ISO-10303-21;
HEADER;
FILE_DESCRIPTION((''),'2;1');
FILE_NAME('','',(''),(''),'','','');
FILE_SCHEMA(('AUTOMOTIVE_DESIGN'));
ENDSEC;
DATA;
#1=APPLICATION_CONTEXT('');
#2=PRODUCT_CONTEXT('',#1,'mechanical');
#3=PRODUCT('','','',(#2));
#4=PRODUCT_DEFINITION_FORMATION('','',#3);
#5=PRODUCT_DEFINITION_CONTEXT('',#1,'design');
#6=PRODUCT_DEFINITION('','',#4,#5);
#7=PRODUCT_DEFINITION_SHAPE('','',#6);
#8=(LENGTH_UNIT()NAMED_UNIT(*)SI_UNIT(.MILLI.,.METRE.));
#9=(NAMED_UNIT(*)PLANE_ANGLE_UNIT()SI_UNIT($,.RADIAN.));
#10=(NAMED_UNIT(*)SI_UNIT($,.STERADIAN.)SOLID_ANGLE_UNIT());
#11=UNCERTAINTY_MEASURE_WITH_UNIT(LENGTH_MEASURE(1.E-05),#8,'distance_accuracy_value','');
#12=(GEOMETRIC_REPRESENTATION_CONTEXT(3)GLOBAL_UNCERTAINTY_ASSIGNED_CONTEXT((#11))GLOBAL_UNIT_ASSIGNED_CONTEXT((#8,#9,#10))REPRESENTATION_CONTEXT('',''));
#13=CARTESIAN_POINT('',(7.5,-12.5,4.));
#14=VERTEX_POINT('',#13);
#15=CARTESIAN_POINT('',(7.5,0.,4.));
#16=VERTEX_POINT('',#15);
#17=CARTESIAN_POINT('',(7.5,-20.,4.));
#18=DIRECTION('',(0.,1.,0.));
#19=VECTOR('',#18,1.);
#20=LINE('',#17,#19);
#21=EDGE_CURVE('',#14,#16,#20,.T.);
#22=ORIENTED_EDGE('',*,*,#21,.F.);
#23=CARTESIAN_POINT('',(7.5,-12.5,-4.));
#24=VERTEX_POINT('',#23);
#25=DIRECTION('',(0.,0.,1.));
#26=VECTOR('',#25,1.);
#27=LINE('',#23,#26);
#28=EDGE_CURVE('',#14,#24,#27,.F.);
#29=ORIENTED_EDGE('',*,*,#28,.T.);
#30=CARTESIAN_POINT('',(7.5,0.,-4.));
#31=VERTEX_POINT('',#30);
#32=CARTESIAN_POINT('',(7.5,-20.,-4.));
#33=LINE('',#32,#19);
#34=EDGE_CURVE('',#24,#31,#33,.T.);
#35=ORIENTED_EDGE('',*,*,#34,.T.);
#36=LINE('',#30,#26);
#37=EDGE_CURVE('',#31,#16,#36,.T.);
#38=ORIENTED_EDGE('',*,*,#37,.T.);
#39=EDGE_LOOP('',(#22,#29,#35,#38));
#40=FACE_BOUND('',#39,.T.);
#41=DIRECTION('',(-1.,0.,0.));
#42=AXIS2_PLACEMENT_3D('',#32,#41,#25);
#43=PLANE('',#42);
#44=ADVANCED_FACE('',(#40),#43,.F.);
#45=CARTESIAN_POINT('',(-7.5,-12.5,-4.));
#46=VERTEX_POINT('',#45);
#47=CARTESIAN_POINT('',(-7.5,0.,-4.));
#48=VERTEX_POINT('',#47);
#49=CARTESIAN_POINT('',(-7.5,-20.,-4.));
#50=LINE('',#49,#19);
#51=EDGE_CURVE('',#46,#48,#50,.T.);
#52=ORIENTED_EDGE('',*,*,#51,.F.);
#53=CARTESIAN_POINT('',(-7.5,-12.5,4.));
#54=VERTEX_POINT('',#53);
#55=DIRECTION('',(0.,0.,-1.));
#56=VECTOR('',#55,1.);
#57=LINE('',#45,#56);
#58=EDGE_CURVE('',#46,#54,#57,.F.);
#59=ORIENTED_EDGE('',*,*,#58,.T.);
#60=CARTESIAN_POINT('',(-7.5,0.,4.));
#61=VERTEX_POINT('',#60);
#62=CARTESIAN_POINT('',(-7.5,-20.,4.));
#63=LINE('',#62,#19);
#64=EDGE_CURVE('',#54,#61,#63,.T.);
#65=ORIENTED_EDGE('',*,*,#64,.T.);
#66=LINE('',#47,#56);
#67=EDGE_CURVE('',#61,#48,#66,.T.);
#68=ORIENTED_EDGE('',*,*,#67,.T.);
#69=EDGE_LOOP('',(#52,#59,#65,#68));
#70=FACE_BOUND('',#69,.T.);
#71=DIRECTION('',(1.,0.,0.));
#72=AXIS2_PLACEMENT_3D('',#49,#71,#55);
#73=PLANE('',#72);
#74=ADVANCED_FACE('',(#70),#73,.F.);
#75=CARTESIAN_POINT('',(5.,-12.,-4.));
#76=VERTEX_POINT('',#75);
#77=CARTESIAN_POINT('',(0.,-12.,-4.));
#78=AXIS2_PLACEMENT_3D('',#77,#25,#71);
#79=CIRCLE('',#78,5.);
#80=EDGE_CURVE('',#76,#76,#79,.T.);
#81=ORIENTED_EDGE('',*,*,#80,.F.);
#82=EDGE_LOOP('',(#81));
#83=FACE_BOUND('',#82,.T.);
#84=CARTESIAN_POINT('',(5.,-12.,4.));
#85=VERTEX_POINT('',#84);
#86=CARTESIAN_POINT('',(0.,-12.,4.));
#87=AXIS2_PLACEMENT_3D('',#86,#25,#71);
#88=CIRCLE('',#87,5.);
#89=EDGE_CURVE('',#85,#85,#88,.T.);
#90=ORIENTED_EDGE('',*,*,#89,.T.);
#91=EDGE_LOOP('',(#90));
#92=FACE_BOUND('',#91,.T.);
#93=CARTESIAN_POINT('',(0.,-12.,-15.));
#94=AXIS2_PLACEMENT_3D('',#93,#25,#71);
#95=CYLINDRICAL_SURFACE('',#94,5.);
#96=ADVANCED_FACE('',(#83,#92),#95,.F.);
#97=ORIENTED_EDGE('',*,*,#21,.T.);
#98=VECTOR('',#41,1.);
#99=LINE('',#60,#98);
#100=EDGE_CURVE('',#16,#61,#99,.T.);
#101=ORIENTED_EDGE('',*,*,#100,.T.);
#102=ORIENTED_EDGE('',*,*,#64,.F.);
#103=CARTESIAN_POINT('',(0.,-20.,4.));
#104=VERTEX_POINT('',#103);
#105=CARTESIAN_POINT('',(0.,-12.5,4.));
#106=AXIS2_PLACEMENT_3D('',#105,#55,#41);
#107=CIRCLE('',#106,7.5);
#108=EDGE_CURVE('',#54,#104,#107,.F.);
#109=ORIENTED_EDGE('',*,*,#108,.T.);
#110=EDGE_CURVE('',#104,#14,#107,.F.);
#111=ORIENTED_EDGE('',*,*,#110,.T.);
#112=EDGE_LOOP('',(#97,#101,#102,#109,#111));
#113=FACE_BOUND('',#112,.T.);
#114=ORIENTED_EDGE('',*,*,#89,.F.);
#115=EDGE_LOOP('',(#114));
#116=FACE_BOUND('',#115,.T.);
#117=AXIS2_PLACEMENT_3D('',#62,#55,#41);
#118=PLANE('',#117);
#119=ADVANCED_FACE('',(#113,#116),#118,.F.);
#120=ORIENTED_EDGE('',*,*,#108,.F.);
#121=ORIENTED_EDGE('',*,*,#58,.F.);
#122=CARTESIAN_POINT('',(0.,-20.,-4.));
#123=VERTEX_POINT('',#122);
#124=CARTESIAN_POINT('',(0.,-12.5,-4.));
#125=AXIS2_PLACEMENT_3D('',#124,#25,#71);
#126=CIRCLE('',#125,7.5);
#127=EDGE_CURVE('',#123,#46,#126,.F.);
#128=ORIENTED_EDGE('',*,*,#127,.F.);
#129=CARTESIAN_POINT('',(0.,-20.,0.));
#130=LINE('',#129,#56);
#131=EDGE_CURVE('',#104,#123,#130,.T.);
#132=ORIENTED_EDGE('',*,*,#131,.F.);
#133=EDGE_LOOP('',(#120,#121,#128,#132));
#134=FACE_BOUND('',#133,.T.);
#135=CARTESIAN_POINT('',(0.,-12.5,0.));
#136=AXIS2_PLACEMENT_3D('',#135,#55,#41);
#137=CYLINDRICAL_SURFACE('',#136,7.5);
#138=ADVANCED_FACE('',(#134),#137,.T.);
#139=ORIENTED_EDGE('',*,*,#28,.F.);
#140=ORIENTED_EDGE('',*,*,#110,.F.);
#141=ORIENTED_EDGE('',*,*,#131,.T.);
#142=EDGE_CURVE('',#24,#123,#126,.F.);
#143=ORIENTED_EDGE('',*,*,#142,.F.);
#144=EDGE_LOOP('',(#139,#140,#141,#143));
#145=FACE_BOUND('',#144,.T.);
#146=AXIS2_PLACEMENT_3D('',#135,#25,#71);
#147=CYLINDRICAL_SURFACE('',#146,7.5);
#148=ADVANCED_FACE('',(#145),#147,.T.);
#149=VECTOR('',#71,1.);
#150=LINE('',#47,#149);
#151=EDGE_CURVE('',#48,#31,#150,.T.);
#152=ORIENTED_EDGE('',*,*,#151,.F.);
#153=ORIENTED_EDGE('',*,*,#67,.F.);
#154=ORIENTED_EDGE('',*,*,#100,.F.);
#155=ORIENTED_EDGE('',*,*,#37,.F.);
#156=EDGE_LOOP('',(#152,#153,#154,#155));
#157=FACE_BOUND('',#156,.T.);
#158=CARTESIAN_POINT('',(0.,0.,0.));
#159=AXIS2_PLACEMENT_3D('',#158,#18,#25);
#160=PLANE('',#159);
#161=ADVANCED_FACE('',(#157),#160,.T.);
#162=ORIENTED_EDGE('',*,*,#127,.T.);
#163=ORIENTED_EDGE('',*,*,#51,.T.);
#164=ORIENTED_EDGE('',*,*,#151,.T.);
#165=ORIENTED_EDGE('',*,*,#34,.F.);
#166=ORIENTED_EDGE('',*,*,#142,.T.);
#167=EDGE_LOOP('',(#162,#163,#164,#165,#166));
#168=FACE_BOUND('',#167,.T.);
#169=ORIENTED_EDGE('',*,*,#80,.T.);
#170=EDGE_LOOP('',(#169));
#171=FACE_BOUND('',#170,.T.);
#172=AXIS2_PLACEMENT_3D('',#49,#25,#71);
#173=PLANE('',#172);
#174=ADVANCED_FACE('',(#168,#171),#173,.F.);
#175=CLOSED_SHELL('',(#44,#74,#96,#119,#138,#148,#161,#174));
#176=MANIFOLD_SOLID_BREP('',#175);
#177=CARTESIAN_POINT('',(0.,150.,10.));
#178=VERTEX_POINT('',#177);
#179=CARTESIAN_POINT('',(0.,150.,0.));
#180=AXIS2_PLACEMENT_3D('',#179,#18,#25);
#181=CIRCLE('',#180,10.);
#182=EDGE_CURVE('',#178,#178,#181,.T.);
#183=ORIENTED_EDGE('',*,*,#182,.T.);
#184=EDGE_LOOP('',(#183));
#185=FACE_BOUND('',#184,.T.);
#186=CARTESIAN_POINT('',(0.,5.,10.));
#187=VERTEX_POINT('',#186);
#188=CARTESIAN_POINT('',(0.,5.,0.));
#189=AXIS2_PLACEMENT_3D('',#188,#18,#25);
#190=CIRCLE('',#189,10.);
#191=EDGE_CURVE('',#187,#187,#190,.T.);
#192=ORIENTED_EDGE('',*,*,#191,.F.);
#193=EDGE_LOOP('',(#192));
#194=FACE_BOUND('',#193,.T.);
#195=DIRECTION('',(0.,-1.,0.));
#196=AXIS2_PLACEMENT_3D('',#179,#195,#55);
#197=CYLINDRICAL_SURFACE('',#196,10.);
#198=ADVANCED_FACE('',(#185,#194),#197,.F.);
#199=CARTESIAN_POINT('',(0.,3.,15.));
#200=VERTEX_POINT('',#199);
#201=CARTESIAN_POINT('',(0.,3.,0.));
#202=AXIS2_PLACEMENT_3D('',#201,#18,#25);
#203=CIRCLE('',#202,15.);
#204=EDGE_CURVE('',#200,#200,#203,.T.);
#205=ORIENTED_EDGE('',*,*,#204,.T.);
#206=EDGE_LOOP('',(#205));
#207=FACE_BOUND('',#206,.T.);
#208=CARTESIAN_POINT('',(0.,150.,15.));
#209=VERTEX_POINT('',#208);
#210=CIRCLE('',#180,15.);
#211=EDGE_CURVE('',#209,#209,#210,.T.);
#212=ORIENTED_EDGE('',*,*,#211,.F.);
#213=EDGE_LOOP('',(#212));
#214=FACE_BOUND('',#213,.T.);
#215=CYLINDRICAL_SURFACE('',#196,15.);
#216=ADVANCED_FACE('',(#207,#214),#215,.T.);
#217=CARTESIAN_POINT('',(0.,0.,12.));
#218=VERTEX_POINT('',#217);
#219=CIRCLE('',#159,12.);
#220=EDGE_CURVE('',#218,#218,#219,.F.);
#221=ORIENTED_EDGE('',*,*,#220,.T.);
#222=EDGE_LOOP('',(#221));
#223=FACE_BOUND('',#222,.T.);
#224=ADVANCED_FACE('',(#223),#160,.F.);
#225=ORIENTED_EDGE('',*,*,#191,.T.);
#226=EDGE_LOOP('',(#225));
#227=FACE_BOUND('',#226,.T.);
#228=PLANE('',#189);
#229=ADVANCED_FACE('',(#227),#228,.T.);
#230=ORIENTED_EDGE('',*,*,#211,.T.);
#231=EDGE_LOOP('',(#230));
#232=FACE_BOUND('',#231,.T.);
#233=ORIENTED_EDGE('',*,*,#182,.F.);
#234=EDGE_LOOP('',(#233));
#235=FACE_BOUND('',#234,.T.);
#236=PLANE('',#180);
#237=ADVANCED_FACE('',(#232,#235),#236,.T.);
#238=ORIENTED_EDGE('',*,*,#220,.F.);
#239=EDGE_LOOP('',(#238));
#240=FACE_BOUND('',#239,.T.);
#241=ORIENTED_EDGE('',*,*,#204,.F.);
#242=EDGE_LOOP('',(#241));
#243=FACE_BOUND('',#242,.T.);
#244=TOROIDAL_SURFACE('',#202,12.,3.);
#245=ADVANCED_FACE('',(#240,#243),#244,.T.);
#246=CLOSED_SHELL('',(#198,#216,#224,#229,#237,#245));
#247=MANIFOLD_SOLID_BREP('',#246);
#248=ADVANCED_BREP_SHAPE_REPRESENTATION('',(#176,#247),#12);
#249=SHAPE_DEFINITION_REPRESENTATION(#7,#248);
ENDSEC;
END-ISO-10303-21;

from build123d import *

# Parameters (mm, degrees)
SKETCH1_R           = 15
BOSS_EXTRUDE1_DEPTH = 150
SHELL1_T            = -5
FILLET1_R           = 3
SKETCH2_W           = 15
SKETCH2_H           = 8
BOSS_EXTRUDE2_DEPTH = 20
SKETCH3_R           = 5
CUT_EXTRUDE1_DEPTH  = 152.940777937
FILLET3_R           = 7.5


with BuildPart() as part:
    # Sketch1 → Boss-Extrude1 (new body)
    with BuildSketch(Plane(origin=(0, 0, 0), x_dir=(1, 0, 0), z_dir=(0, 1, 0))):
        with Locations(Location((0, 0, 0), (0, 0, 270))):
            Circle(SKETCH1_R)
    extrude(amount=BOSS_EXTRUDE1_DEPTH)

    # Shell1
    shell1_openings = [part.faces().sort_by_distance(p)[0] for p in [
        (0, 150, 0),
    ]]
    offset(amount=SHELL1_T, openings=shell1_openings, kind=Kind.INTERSECTION)

    # Fillet1
    fillet1_edges = [part.edges().sort_by_distance(p)[0] for p in [
        (0, 0, -15),
    ]]
    fillet(fillet1_edges, radius=FILLET1_R)


with BuildPart() as body_2:
    # Sketch2 → Boss-Extrude2 (new body)
    with BuildSketch(Plane.XZ):
        Rectangle(SKETCH2_W, SKETCH2_H)
    extrude(amount=BOSS_EXTRUDE2_DEPTH)

    # Sketch3 → Cut-Extrude1 (cut, through all)
    with BuildSketch(Plane.XY.offset(4)):
        with Locations((0, -12)):
            Circle(SKETCH3_R)
    extrude(amount=-CUT_EXTRUDE1_DEPTH, mode=Mode.SUBTRACT)

    # Fillet3
    fillet3_edges = [body_2.edges().sort_by_distance(p)[0] for p in [
        (7.5, -20, 0),
        (-7.5, -20, 0),
    ]]
    fillet(fillet3_edges, radius=FILLET3_R - 0.0001)  # a hair under: the kernel refuses the full size


solid = Compound([part.part, body_2.part])
